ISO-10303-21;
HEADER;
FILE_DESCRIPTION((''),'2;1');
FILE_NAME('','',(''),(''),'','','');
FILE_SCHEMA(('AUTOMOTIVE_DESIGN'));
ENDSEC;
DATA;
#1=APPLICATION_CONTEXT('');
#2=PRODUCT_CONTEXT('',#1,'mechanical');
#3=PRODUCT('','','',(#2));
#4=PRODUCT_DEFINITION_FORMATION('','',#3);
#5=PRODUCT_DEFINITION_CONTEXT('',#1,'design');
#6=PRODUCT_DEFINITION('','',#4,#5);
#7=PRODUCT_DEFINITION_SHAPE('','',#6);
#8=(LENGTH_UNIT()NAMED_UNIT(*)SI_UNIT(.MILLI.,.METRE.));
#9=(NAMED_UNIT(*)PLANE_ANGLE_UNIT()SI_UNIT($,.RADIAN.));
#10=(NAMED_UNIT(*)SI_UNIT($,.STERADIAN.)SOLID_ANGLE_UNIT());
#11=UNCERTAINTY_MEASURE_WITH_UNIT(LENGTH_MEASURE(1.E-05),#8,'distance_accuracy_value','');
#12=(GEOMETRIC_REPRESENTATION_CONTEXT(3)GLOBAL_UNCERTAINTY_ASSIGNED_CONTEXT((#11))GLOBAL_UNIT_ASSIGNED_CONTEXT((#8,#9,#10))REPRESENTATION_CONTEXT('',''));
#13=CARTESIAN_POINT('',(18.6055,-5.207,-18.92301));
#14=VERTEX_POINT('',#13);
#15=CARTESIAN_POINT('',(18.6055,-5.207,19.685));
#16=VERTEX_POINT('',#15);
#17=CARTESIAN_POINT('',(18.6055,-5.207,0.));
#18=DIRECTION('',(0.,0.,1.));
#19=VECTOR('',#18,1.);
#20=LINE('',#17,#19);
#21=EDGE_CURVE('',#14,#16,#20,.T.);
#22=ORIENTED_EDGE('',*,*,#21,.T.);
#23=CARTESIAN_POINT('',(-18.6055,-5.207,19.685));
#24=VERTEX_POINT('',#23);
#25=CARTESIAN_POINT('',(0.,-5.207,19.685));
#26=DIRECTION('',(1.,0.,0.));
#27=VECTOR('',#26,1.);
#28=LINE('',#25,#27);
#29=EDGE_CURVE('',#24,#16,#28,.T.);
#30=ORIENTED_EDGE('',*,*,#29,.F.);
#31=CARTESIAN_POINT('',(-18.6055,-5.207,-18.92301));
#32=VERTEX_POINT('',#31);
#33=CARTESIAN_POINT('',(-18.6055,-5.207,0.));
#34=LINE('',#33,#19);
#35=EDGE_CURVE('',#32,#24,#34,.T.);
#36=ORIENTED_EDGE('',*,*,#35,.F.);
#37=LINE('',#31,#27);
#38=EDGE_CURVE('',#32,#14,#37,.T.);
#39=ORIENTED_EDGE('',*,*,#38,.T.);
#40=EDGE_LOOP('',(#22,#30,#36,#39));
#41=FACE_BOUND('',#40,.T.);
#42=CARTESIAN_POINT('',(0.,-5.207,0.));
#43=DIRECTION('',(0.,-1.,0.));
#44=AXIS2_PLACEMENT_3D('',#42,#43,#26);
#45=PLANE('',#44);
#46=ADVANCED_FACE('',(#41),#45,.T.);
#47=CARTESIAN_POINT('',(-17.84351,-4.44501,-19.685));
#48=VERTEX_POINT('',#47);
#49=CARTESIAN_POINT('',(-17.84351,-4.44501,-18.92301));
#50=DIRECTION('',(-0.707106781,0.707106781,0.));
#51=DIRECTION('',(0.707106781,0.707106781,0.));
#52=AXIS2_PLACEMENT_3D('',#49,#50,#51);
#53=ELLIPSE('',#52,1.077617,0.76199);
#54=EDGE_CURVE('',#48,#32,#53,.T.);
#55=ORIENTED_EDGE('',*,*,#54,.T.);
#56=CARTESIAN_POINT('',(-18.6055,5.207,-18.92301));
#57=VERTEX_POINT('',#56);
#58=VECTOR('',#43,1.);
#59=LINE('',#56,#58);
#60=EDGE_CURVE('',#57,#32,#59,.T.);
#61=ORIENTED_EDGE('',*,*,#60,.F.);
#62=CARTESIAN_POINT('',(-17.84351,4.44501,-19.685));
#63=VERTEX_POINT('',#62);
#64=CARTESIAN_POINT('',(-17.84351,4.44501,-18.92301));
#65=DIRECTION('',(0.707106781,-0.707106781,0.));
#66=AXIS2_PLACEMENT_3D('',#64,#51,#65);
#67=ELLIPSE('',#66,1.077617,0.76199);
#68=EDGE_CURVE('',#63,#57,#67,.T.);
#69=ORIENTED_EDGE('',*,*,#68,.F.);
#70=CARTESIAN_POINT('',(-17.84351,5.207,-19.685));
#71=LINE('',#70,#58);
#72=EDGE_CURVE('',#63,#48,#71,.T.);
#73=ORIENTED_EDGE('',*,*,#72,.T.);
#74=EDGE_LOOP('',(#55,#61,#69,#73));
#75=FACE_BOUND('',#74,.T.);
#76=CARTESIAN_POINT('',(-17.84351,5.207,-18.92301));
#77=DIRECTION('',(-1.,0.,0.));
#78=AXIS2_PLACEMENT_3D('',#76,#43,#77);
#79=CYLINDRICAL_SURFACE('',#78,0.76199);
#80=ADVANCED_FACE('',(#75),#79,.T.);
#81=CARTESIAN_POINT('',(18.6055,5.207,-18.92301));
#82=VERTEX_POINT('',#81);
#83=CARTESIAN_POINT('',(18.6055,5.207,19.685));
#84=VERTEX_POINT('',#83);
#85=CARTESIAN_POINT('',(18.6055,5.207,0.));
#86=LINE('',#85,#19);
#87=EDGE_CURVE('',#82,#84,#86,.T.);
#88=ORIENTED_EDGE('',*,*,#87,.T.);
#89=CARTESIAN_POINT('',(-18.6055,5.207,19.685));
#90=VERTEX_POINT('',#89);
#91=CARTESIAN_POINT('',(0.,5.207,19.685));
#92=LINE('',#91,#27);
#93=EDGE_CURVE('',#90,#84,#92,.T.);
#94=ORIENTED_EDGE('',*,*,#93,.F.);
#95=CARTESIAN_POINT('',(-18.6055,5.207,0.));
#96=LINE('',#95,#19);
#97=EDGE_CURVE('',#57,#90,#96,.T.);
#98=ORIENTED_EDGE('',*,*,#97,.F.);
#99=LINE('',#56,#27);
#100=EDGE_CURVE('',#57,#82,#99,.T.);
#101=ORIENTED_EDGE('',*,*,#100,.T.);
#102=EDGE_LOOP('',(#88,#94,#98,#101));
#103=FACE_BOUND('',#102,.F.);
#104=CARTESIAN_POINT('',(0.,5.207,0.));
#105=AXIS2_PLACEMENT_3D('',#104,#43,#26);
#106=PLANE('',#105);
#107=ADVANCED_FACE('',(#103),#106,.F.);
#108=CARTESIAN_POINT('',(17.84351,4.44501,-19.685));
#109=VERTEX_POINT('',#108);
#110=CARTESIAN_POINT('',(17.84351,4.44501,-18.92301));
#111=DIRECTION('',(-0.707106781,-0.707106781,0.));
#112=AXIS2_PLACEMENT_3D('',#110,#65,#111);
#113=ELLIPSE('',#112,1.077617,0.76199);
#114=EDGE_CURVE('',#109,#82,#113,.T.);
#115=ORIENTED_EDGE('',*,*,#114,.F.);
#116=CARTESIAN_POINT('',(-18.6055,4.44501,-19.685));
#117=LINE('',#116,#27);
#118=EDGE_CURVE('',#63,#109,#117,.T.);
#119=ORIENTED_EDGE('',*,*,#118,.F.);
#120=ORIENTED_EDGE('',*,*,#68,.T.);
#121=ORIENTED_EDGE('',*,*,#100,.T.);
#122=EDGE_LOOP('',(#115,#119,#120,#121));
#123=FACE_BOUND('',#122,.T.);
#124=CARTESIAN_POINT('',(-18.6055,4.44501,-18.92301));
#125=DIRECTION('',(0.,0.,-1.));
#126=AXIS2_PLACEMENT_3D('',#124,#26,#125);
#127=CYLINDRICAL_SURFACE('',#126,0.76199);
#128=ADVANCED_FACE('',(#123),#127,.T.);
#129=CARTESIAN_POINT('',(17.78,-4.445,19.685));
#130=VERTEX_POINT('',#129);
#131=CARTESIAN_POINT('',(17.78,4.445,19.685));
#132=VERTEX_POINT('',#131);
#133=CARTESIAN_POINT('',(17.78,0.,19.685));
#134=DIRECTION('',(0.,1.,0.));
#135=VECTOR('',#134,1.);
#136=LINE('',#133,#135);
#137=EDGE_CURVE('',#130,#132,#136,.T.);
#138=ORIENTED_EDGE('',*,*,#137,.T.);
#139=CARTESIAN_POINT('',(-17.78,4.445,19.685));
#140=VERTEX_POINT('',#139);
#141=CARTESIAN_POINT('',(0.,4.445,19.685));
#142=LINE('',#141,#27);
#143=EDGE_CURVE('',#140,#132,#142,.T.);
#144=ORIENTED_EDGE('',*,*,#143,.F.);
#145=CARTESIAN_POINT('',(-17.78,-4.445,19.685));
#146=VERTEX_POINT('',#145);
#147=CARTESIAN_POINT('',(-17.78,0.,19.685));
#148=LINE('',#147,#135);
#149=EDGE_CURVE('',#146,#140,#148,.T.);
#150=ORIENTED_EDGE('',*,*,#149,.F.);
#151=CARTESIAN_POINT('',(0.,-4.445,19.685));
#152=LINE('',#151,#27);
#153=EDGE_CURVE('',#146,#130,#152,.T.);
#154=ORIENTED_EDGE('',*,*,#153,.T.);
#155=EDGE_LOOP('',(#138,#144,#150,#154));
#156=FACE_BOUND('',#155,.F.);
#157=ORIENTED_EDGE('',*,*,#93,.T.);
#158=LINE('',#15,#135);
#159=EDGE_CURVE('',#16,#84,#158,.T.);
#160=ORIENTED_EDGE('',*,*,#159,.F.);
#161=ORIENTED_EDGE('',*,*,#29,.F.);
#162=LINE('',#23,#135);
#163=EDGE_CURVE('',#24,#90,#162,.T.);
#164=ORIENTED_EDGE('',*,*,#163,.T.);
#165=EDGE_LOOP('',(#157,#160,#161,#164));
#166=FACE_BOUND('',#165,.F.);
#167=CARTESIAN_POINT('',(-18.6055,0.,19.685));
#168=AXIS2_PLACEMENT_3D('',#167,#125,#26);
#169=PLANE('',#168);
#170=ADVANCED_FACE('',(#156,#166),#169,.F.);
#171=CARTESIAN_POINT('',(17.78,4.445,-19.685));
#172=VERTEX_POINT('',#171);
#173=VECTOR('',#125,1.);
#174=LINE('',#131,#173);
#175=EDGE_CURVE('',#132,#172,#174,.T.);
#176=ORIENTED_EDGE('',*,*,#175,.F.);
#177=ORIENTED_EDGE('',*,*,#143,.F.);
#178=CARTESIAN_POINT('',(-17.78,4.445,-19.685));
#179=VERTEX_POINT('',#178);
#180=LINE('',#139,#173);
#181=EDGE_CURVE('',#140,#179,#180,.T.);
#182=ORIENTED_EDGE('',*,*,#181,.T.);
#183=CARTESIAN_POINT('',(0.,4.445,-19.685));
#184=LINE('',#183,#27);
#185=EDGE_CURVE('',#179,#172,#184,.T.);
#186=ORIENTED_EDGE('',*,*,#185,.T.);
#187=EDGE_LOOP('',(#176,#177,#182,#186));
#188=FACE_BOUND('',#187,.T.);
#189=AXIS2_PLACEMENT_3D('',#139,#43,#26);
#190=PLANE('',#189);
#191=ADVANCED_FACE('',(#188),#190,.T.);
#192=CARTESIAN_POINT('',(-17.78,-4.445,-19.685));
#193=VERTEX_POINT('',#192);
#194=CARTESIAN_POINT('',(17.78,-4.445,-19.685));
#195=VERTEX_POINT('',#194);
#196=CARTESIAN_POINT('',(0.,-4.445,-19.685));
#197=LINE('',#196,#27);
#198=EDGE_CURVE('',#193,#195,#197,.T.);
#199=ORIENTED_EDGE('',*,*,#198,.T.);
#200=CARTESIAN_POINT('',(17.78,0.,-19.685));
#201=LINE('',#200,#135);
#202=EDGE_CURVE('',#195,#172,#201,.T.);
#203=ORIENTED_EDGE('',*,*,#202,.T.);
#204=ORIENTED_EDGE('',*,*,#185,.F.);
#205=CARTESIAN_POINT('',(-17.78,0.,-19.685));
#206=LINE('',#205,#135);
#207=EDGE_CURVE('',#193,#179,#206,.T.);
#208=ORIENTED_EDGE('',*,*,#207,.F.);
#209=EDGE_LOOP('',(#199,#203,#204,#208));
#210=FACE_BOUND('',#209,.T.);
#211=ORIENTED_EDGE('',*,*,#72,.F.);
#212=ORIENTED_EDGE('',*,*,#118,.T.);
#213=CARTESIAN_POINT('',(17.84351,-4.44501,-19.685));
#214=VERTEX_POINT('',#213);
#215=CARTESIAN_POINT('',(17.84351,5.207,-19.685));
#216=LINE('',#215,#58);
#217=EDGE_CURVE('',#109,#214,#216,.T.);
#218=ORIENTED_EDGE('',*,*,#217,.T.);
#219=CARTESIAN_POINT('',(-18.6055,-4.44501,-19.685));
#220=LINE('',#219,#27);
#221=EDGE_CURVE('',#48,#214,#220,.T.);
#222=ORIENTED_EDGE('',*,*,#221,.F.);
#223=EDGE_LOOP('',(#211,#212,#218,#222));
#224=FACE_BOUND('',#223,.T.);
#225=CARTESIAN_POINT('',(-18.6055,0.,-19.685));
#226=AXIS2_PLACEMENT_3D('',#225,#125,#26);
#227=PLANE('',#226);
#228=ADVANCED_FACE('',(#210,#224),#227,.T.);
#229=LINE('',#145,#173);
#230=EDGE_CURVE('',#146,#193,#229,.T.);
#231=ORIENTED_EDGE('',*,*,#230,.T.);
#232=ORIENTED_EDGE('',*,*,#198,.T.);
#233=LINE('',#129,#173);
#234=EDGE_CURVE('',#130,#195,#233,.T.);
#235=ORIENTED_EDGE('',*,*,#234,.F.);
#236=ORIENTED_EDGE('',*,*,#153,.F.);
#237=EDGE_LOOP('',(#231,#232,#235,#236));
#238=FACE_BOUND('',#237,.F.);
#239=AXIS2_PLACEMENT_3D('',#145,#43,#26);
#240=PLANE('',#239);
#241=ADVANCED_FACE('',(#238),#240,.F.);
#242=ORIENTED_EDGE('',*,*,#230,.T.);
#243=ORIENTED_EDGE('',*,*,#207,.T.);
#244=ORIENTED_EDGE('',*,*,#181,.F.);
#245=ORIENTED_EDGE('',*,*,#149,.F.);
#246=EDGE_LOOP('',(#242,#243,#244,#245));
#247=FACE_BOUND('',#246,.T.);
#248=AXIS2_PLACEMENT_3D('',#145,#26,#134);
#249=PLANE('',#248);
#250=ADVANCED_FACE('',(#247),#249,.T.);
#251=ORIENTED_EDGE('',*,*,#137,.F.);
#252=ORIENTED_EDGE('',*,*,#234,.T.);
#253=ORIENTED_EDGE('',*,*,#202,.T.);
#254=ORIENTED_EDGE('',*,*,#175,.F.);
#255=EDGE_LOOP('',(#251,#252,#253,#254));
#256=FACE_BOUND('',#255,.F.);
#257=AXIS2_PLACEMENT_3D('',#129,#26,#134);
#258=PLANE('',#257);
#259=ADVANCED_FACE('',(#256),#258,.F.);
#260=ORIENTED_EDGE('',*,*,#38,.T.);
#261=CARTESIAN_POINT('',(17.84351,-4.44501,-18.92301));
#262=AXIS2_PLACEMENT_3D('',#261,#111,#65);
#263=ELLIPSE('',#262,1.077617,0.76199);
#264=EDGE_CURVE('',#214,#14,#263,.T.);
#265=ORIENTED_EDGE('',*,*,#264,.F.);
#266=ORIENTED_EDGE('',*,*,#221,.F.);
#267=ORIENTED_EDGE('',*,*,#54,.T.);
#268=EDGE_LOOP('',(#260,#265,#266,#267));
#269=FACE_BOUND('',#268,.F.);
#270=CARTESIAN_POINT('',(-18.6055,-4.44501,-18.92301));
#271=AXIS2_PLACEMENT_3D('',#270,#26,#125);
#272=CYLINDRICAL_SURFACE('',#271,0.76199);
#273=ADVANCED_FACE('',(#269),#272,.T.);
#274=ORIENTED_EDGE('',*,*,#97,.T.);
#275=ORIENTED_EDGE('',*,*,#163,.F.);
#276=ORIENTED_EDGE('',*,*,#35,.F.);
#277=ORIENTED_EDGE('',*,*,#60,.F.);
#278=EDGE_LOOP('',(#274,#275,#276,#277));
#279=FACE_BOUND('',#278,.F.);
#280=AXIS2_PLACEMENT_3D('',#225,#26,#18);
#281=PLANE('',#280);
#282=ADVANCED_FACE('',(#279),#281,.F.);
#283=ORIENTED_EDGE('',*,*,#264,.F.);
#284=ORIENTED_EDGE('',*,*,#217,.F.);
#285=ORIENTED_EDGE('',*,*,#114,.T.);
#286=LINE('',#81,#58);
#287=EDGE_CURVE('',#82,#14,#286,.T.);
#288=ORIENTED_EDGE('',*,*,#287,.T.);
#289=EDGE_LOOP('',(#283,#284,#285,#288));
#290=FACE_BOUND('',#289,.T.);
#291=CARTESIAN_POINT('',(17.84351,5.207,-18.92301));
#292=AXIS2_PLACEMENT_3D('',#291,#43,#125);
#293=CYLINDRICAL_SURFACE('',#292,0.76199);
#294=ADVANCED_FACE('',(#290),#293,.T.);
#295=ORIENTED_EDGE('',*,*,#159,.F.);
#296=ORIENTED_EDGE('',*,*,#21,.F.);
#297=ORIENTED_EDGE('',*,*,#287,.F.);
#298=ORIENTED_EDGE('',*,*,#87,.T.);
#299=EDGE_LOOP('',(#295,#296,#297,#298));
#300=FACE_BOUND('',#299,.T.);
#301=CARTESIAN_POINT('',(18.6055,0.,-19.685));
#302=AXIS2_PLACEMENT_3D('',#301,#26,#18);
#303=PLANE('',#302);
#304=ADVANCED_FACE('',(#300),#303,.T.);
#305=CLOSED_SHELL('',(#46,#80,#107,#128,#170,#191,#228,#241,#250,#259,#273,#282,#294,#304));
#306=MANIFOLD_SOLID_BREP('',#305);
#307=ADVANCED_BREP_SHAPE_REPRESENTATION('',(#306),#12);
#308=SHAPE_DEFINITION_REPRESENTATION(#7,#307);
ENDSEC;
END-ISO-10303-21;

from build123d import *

# Parameters (mm, degrees)
F0_W     = 37.211
F0_H     = 39.37
F1_DEPTH = 5.207
F2_W     = 35.56
F2_H     = 8.89
F3_DEPTH = 39.37
F4_R     = 0.76199


# Not quite as in the source:
# - a fillet or chamfer is up to 0.001 mm smaller than in the source, because OpenCascade refuses the exact size


with BuildPart() as f1:
    # F0 (on Front) → F1 (new body, symmetric)
    with BuildSketch(Plane.XZ):
        Rectangle(F0_W, F0_H)
    extrude(amount=F1_DEPTH, both=True)

    # F2 (on face) → F3 (cut)
    with BuildSketch(Plane.XY.offset(19.685)):
        Rectangle(F2_W, F2_H)
    extrude(amount=-F3_DEPTH, mode=Mode.SUBTRACT)

    # F4 (radius 0.762 in the source; OpenCascade refuses exactly that, so slightly less here)
    f4_edges = [f1.edges().sort_by_distance(p)[0] for p in [
        (18.6055, 0, -19.685),
        (0, -5.207, -19.685),
        (0, 5.207, -19.685),
        (-18.6055, 0, -19.685),
    ]]
    fillet(f4_edges, radius=F4_R)


solid = f1.part
